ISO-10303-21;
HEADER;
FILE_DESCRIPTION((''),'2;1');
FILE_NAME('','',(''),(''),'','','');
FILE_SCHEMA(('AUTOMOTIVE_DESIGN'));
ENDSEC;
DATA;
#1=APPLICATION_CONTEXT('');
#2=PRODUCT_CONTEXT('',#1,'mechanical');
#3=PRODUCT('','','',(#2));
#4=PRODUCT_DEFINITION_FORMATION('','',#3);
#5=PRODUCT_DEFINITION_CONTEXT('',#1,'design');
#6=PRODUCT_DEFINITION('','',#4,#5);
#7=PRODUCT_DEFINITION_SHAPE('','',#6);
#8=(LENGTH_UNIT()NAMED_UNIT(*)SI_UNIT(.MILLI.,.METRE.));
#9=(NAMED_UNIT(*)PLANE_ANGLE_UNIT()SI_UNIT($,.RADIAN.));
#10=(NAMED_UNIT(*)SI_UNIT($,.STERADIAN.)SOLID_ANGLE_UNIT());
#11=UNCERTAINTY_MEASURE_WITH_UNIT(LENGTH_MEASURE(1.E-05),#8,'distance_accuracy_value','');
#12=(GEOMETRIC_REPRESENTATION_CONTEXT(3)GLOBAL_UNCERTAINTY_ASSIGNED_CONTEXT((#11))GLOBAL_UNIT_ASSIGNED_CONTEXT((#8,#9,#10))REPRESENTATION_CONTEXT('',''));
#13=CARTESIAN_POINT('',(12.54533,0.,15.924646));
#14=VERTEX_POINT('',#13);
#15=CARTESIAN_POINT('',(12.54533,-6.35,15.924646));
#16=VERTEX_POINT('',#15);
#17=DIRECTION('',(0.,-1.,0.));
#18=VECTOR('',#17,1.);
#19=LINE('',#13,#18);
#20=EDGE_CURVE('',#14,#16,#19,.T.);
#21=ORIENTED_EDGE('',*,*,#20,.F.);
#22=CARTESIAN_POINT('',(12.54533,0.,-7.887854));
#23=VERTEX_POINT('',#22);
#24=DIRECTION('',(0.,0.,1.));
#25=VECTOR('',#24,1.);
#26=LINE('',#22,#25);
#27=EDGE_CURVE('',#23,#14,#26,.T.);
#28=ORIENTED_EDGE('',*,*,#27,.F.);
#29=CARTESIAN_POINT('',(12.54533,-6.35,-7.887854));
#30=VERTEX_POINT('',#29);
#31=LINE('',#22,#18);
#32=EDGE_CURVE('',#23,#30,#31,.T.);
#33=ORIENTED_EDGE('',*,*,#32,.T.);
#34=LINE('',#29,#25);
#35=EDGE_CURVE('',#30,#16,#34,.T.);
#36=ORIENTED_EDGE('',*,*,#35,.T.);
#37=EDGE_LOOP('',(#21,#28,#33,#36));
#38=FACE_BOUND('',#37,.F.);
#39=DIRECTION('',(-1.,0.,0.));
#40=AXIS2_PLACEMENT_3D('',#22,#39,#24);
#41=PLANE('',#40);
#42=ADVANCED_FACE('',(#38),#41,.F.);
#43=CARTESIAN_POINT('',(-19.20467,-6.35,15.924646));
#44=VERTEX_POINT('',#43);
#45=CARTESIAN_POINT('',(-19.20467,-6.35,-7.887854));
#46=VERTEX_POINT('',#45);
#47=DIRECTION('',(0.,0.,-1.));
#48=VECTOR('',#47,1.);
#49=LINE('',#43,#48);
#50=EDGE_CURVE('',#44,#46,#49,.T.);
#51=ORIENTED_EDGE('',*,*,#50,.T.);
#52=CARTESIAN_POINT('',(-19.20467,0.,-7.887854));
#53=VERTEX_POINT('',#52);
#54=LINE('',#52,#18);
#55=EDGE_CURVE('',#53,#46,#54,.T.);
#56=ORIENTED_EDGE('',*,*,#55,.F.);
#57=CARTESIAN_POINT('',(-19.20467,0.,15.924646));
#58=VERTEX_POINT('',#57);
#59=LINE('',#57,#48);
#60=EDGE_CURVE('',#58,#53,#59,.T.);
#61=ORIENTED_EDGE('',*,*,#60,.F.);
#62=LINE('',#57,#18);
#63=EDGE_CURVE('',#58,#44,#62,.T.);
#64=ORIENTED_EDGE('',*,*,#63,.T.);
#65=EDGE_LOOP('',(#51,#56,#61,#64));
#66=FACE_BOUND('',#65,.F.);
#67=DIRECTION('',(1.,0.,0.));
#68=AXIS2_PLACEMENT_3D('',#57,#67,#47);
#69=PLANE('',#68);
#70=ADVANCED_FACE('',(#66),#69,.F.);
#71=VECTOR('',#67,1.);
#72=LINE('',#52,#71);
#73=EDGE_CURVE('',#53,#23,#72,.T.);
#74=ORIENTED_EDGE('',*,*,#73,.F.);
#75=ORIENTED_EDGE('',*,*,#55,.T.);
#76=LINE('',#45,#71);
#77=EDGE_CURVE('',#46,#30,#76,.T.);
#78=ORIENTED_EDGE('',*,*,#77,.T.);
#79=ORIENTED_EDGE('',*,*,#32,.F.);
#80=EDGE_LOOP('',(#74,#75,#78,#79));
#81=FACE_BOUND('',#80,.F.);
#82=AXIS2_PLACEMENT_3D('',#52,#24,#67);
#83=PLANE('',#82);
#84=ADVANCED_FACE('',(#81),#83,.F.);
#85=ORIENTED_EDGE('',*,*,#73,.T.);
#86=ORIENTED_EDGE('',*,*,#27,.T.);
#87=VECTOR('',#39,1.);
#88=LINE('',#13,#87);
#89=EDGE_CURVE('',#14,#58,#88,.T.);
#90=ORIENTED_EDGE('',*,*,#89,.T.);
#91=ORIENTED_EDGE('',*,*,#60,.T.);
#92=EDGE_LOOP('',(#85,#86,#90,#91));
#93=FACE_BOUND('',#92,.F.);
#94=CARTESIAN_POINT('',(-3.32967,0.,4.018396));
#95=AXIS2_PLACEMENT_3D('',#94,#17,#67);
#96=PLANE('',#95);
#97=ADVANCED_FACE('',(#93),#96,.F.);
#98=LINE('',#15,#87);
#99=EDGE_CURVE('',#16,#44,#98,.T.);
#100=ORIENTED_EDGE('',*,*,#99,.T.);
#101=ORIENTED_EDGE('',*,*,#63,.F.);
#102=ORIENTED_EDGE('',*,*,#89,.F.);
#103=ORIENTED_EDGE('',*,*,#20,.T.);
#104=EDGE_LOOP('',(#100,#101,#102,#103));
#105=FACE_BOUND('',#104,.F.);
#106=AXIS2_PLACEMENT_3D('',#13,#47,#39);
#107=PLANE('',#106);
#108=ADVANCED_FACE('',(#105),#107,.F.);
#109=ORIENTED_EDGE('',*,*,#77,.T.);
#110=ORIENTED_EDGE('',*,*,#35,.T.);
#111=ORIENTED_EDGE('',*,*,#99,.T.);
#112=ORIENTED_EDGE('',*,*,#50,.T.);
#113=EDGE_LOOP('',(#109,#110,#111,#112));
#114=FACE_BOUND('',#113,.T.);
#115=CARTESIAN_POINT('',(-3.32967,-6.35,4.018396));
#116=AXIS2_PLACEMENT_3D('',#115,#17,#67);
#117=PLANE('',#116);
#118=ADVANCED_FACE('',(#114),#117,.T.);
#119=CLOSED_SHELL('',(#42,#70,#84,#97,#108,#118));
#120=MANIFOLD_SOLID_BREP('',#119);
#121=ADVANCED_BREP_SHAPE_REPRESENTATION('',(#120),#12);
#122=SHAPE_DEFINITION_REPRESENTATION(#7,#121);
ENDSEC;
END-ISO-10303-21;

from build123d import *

# Parameters (mm, degrees)
F4_DEPTH = 6.35


# Not quite as in the source:
# - the program builds the solid bodies; features that only make, move or delete a surface that nothing else refers to are left out


with BuildPart() as f4:
    # F0 (on Front) → F4 (new body)
    with BuildSketch(Plane.XZ):
        Polygon((12.5453299433, 15.9246460537), (-19.2046700567, 15.9246460537), (-19.2046700567, -7.8878539463), (12.5453299433, -7.8878539463), (12.5453299433, -6.3003510131), (12.5453299433, -4.7128512226), (12.5453299433, -3.1253514321), (12.5453299433, -1.5378516416), (12.5453299433, 0.0496481488), (12.5453299433, 1.6371479393), (12.5453299433, 3.2246477298), (12.5453299433, 4.8121475203), (12.5453299433, 6.3996473108), (12.5453299433, 7.9871471013), (12.5453299433, 9.5746468917), (12.5453299433, 11.1621466822), (12.5453299433, 12.7496464727), (12.5453299433, 14.3371462632), align=None)
    extrude(amount=F4_DEPTH)


solid = f4.part
